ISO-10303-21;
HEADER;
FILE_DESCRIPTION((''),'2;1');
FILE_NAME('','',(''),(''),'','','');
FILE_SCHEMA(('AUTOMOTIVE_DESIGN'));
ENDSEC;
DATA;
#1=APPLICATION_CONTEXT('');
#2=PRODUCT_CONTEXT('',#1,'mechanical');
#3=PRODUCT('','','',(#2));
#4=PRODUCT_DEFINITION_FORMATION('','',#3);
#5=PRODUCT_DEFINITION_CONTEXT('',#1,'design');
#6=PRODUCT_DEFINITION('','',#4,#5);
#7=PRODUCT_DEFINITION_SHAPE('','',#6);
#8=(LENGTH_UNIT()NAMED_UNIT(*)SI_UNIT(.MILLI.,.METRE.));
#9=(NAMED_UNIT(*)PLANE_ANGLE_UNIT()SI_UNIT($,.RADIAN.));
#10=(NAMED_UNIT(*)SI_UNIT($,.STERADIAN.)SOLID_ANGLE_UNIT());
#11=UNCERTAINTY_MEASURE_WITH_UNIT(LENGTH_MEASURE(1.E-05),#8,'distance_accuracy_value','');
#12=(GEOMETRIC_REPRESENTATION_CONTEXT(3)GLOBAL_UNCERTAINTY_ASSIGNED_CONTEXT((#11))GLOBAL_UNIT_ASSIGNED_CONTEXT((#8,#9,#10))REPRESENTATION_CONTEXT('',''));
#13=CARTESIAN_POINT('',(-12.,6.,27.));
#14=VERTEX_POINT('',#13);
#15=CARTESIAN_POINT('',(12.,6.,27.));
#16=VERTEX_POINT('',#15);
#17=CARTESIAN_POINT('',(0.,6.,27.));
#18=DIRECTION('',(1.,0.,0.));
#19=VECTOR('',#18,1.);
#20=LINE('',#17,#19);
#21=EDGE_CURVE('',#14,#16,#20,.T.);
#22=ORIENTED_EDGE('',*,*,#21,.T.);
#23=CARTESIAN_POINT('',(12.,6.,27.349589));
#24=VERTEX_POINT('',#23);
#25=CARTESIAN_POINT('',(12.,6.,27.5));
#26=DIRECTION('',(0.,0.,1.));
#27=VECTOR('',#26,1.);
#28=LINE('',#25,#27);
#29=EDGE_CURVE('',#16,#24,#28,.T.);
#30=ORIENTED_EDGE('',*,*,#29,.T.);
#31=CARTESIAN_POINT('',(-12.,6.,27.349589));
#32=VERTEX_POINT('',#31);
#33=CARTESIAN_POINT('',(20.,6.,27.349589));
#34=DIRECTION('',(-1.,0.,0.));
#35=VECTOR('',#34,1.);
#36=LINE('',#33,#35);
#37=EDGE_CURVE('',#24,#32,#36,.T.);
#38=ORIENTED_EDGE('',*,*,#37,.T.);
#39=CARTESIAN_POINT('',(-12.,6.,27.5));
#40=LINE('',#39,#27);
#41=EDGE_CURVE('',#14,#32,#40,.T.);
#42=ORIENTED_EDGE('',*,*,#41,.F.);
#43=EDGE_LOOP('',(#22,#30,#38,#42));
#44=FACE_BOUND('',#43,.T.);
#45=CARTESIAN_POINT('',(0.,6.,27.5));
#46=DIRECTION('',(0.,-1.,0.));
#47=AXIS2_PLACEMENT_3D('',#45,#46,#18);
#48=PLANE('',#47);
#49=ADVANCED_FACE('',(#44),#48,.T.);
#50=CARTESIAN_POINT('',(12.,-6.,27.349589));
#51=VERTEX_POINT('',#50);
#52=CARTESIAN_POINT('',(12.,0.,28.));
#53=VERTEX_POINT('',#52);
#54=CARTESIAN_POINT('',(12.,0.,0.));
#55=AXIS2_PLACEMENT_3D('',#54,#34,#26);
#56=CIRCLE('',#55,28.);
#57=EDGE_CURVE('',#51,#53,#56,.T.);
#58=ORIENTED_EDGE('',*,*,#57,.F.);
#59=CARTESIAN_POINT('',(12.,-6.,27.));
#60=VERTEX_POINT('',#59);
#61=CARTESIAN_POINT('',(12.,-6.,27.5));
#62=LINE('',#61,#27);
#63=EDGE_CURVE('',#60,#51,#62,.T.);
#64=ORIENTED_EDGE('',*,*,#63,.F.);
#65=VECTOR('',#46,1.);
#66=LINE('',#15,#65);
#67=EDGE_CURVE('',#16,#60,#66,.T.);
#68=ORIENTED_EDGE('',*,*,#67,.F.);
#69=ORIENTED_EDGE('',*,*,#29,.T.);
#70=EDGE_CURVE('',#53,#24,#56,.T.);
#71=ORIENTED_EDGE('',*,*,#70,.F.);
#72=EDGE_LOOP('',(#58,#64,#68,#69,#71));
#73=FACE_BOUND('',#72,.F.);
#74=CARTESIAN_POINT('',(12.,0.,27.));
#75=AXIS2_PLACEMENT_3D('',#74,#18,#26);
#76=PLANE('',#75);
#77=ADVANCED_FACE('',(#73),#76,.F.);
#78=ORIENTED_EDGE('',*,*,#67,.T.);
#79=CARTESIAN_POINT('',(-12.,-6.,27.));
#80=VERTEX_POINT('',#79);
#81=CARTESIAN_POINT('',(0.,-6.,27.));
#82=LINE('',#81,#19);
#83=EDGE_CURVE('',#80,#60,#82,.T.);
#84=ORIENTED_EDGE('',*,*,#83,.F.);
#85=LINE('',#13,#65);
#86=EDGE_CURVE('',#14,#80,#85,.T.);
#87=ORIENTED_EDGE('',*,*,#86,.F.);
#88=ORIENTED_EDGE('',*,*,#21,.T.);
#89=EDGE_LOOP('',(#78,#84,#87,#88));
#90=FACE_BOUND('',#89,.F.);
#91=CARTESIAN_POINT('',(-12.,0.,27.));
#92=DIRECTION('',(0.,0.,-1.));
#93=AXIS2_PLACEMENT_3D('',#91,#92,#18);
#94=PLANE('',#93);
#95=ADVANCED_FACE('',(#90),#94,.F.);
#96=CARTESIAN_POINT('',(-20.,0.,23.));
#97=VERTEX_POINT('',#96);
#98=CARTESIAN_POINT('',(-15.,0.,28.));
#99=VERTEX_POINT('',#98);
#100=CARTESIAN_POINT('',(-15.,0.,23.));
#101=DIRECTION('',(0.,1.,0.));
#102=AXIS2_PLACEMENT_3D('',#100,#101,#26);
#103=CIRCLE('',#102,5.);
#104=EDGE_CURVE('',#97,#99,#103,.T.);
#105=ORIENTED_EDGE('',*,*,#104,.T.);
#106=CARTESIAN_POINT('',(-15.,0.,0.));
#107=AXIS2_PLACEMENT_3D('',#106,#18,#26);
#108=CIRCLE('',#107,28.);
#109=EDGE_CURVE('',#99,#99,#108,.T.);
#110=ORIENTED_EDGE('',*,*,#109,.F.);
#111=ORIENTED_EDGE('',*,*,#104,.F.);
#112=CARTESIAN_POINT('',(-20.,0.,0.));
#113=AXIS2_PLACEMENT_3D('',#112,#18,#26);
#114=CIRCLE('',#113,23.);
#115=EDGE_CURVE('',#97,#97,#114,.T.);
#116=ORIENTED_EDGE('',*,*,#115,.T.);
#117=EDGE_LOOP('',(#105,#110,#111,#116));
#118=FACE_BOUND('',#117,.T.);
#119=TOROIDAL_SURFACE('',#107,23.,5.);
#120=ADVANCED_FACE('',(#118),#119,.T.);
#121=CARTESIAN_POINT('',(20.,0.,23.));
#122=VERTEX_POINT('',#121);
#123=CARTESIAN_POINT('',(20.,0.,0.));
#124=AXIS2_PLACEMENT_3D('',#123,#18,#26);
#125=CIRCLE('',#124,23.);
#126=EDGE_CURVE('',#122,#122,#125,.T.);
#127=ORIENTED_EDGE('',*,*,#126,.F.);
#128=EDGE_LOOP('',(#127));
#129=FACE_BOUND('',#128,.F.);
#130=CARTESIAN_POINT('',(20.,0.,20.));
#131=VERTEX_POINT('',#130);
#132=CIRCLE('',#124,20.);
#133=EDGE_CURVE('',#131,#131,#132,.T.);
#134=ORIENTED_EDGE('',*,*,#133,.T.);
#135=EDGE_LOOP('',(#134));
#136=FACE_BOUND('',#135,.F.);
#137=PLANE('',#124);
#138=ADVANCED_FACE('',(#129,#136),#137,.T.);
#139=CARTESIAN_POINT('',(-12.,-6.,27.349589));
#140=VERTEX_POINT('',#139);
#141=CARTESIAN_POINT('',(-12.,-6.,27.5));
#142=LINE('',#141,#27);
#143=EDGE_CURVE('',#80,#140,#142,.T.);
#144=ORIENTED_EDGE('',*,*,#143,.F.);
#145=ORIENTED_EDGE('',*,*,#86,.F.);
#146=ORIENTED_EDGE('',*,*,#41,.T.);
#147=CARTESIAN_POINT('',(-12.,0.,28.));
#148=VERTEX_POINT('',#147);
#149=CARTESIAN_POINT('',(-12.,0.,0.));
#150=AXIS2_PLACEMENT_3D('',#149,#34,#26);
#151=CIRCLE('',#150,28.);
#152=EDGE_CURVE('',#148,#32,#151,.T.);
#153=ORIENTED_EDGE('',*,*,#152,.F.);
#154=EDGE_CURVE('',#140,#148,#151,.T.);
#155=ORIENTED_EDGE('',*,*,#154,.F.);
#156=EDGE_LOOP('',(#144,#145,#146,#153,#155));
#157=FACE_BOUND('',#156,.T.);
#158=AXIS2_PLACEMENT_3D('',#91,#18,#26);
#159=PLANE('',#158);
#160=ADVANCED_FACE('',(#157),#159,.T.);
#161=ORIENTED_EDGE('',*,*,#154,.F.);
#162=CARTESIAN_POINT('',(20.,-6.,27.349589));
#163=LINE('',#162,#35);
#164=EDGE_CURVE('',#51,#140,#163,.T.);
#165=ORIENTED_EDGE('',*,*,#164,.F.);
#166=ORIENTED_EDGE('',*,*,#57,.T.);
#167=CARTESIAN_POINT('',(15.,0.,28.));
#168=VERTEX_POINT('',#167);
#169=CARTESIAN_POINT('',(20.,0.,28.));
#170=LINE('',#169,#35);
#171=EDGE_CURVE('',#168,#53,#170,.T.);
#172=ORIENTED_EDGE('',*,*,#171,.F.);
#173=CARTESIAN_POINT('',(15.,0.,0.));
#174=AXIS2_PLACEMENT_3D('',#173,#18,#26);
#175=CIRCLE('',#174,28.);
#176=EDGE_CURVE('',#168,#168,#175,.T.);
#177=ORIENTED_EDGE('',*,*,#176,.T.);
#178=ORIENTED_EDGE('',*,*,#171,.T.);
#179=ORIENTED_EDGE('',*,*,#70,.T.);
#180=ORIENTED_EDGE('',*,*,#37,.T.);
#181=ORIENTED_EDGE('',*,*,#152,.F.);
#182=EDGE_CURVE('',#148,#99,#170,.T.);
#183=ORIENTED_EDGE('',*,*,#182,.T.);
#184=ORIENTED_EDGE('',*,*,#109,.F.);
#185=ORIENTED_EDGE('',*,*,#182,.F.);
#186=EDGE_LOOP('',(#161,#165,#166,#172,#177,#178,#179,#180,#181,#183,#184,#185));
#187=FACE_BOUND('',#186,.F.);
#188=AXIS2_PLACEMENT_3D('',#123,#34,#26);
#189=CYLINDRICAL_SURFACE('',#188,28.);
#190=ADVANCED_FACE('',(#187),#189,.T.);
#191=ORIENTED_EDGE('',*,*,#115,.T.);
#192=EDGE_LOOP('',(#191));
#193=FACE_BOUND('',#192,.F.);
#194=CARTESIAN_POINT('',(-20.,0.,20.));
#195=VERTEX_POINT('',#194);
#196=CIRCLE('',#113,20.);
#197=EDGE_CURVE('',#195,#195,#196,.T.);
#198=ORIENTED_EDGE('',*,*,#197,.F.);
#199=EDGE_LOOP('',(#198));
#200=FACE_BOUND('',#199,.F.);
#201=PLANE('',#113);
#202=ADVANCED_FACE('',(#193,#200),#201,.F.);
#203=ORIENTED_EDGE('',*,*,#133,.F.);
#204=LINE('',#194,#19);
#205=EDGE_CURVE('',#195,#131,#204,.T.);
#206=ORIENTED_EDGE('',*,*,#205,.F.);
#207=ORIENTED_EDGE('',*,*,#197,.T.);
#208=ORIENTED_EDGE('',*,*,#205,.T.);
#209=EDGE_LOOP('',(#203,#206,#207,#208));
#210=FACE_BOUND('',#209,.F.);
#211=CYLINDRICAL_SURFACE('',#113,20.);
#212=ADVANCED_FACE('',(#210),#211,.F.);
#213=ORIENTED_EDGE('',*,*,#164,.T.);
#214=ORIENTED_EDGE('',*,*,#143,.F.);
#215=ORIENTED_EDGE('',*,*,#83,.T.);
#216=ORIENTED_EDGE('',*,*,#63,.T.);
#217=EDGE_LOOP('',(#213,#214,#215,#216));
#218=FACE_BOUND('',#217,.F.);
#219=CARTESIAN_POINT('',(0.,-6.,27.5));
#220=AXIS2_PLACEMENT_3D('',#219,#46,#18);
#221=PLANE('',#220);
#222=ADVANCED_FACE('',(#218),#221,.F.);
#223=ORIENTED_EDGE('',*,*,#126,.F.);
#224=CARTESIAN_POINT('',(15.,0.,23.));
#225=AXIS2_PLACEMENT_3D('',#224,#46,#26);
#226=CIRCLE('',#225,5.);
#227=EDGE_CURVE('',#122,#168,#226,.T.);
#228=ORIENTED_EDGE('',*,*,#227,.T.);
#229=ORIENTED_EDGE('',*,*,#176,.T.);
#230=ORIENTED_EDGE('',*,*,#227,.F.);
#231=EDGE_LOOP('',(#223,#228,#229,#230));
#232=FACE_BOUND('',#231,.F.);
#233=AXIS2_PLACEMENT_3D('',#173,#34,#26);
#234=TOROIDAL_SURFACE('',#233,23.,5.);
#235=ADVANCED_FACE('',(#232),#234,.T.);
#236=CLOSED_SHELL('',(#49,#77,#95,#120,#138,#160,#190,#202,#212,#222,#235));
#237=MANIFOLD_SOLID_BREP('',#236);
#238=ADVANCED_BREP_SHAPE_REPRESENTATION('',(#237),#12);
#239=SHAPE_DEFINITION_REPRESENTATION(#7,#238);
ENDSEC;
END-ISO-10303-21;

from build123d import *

# Parameters (mm, degrees)
F0_W     = 24
F0_H     = 1
F2_R     = 5
F3_DEPTH = 6


with BuildPart() as f1:
    # F0 (on Front) → F1 (revolve)
    with BuildSketch(Plane.XZ):
        Polygon((-20, 28), (-20, 20), (0, 20), (20, 20), (20, 28), (12, 28), (12, 27), (-12, 27), (-12, 28), align=None)
        with Locations((0, 27.5)):
            Rectangle(F0_W, F0_H)
    revolve(axis=Axis((2.7690531401, 0, 0), (1, 0, 0)))

    # F2
    f2_edges = [f1.edges().sort_by_distance(p)[0] for p in [
        (20, 0, -28),
        (-20, 0, -28),
    ]]
    fillet(f2_edges, radius=F2_R)

    # F0 (on Front) → F3 (cut, symmetric)
    with BuildSketch(Plane.XZ):
        with Locations((0, 27.5)):
            Rectangle(F0_W, F0_H)
    extrude(amount=F3_DEPTH, both=True, mode=Mode.SUBTRACT)


solid = f1.part
